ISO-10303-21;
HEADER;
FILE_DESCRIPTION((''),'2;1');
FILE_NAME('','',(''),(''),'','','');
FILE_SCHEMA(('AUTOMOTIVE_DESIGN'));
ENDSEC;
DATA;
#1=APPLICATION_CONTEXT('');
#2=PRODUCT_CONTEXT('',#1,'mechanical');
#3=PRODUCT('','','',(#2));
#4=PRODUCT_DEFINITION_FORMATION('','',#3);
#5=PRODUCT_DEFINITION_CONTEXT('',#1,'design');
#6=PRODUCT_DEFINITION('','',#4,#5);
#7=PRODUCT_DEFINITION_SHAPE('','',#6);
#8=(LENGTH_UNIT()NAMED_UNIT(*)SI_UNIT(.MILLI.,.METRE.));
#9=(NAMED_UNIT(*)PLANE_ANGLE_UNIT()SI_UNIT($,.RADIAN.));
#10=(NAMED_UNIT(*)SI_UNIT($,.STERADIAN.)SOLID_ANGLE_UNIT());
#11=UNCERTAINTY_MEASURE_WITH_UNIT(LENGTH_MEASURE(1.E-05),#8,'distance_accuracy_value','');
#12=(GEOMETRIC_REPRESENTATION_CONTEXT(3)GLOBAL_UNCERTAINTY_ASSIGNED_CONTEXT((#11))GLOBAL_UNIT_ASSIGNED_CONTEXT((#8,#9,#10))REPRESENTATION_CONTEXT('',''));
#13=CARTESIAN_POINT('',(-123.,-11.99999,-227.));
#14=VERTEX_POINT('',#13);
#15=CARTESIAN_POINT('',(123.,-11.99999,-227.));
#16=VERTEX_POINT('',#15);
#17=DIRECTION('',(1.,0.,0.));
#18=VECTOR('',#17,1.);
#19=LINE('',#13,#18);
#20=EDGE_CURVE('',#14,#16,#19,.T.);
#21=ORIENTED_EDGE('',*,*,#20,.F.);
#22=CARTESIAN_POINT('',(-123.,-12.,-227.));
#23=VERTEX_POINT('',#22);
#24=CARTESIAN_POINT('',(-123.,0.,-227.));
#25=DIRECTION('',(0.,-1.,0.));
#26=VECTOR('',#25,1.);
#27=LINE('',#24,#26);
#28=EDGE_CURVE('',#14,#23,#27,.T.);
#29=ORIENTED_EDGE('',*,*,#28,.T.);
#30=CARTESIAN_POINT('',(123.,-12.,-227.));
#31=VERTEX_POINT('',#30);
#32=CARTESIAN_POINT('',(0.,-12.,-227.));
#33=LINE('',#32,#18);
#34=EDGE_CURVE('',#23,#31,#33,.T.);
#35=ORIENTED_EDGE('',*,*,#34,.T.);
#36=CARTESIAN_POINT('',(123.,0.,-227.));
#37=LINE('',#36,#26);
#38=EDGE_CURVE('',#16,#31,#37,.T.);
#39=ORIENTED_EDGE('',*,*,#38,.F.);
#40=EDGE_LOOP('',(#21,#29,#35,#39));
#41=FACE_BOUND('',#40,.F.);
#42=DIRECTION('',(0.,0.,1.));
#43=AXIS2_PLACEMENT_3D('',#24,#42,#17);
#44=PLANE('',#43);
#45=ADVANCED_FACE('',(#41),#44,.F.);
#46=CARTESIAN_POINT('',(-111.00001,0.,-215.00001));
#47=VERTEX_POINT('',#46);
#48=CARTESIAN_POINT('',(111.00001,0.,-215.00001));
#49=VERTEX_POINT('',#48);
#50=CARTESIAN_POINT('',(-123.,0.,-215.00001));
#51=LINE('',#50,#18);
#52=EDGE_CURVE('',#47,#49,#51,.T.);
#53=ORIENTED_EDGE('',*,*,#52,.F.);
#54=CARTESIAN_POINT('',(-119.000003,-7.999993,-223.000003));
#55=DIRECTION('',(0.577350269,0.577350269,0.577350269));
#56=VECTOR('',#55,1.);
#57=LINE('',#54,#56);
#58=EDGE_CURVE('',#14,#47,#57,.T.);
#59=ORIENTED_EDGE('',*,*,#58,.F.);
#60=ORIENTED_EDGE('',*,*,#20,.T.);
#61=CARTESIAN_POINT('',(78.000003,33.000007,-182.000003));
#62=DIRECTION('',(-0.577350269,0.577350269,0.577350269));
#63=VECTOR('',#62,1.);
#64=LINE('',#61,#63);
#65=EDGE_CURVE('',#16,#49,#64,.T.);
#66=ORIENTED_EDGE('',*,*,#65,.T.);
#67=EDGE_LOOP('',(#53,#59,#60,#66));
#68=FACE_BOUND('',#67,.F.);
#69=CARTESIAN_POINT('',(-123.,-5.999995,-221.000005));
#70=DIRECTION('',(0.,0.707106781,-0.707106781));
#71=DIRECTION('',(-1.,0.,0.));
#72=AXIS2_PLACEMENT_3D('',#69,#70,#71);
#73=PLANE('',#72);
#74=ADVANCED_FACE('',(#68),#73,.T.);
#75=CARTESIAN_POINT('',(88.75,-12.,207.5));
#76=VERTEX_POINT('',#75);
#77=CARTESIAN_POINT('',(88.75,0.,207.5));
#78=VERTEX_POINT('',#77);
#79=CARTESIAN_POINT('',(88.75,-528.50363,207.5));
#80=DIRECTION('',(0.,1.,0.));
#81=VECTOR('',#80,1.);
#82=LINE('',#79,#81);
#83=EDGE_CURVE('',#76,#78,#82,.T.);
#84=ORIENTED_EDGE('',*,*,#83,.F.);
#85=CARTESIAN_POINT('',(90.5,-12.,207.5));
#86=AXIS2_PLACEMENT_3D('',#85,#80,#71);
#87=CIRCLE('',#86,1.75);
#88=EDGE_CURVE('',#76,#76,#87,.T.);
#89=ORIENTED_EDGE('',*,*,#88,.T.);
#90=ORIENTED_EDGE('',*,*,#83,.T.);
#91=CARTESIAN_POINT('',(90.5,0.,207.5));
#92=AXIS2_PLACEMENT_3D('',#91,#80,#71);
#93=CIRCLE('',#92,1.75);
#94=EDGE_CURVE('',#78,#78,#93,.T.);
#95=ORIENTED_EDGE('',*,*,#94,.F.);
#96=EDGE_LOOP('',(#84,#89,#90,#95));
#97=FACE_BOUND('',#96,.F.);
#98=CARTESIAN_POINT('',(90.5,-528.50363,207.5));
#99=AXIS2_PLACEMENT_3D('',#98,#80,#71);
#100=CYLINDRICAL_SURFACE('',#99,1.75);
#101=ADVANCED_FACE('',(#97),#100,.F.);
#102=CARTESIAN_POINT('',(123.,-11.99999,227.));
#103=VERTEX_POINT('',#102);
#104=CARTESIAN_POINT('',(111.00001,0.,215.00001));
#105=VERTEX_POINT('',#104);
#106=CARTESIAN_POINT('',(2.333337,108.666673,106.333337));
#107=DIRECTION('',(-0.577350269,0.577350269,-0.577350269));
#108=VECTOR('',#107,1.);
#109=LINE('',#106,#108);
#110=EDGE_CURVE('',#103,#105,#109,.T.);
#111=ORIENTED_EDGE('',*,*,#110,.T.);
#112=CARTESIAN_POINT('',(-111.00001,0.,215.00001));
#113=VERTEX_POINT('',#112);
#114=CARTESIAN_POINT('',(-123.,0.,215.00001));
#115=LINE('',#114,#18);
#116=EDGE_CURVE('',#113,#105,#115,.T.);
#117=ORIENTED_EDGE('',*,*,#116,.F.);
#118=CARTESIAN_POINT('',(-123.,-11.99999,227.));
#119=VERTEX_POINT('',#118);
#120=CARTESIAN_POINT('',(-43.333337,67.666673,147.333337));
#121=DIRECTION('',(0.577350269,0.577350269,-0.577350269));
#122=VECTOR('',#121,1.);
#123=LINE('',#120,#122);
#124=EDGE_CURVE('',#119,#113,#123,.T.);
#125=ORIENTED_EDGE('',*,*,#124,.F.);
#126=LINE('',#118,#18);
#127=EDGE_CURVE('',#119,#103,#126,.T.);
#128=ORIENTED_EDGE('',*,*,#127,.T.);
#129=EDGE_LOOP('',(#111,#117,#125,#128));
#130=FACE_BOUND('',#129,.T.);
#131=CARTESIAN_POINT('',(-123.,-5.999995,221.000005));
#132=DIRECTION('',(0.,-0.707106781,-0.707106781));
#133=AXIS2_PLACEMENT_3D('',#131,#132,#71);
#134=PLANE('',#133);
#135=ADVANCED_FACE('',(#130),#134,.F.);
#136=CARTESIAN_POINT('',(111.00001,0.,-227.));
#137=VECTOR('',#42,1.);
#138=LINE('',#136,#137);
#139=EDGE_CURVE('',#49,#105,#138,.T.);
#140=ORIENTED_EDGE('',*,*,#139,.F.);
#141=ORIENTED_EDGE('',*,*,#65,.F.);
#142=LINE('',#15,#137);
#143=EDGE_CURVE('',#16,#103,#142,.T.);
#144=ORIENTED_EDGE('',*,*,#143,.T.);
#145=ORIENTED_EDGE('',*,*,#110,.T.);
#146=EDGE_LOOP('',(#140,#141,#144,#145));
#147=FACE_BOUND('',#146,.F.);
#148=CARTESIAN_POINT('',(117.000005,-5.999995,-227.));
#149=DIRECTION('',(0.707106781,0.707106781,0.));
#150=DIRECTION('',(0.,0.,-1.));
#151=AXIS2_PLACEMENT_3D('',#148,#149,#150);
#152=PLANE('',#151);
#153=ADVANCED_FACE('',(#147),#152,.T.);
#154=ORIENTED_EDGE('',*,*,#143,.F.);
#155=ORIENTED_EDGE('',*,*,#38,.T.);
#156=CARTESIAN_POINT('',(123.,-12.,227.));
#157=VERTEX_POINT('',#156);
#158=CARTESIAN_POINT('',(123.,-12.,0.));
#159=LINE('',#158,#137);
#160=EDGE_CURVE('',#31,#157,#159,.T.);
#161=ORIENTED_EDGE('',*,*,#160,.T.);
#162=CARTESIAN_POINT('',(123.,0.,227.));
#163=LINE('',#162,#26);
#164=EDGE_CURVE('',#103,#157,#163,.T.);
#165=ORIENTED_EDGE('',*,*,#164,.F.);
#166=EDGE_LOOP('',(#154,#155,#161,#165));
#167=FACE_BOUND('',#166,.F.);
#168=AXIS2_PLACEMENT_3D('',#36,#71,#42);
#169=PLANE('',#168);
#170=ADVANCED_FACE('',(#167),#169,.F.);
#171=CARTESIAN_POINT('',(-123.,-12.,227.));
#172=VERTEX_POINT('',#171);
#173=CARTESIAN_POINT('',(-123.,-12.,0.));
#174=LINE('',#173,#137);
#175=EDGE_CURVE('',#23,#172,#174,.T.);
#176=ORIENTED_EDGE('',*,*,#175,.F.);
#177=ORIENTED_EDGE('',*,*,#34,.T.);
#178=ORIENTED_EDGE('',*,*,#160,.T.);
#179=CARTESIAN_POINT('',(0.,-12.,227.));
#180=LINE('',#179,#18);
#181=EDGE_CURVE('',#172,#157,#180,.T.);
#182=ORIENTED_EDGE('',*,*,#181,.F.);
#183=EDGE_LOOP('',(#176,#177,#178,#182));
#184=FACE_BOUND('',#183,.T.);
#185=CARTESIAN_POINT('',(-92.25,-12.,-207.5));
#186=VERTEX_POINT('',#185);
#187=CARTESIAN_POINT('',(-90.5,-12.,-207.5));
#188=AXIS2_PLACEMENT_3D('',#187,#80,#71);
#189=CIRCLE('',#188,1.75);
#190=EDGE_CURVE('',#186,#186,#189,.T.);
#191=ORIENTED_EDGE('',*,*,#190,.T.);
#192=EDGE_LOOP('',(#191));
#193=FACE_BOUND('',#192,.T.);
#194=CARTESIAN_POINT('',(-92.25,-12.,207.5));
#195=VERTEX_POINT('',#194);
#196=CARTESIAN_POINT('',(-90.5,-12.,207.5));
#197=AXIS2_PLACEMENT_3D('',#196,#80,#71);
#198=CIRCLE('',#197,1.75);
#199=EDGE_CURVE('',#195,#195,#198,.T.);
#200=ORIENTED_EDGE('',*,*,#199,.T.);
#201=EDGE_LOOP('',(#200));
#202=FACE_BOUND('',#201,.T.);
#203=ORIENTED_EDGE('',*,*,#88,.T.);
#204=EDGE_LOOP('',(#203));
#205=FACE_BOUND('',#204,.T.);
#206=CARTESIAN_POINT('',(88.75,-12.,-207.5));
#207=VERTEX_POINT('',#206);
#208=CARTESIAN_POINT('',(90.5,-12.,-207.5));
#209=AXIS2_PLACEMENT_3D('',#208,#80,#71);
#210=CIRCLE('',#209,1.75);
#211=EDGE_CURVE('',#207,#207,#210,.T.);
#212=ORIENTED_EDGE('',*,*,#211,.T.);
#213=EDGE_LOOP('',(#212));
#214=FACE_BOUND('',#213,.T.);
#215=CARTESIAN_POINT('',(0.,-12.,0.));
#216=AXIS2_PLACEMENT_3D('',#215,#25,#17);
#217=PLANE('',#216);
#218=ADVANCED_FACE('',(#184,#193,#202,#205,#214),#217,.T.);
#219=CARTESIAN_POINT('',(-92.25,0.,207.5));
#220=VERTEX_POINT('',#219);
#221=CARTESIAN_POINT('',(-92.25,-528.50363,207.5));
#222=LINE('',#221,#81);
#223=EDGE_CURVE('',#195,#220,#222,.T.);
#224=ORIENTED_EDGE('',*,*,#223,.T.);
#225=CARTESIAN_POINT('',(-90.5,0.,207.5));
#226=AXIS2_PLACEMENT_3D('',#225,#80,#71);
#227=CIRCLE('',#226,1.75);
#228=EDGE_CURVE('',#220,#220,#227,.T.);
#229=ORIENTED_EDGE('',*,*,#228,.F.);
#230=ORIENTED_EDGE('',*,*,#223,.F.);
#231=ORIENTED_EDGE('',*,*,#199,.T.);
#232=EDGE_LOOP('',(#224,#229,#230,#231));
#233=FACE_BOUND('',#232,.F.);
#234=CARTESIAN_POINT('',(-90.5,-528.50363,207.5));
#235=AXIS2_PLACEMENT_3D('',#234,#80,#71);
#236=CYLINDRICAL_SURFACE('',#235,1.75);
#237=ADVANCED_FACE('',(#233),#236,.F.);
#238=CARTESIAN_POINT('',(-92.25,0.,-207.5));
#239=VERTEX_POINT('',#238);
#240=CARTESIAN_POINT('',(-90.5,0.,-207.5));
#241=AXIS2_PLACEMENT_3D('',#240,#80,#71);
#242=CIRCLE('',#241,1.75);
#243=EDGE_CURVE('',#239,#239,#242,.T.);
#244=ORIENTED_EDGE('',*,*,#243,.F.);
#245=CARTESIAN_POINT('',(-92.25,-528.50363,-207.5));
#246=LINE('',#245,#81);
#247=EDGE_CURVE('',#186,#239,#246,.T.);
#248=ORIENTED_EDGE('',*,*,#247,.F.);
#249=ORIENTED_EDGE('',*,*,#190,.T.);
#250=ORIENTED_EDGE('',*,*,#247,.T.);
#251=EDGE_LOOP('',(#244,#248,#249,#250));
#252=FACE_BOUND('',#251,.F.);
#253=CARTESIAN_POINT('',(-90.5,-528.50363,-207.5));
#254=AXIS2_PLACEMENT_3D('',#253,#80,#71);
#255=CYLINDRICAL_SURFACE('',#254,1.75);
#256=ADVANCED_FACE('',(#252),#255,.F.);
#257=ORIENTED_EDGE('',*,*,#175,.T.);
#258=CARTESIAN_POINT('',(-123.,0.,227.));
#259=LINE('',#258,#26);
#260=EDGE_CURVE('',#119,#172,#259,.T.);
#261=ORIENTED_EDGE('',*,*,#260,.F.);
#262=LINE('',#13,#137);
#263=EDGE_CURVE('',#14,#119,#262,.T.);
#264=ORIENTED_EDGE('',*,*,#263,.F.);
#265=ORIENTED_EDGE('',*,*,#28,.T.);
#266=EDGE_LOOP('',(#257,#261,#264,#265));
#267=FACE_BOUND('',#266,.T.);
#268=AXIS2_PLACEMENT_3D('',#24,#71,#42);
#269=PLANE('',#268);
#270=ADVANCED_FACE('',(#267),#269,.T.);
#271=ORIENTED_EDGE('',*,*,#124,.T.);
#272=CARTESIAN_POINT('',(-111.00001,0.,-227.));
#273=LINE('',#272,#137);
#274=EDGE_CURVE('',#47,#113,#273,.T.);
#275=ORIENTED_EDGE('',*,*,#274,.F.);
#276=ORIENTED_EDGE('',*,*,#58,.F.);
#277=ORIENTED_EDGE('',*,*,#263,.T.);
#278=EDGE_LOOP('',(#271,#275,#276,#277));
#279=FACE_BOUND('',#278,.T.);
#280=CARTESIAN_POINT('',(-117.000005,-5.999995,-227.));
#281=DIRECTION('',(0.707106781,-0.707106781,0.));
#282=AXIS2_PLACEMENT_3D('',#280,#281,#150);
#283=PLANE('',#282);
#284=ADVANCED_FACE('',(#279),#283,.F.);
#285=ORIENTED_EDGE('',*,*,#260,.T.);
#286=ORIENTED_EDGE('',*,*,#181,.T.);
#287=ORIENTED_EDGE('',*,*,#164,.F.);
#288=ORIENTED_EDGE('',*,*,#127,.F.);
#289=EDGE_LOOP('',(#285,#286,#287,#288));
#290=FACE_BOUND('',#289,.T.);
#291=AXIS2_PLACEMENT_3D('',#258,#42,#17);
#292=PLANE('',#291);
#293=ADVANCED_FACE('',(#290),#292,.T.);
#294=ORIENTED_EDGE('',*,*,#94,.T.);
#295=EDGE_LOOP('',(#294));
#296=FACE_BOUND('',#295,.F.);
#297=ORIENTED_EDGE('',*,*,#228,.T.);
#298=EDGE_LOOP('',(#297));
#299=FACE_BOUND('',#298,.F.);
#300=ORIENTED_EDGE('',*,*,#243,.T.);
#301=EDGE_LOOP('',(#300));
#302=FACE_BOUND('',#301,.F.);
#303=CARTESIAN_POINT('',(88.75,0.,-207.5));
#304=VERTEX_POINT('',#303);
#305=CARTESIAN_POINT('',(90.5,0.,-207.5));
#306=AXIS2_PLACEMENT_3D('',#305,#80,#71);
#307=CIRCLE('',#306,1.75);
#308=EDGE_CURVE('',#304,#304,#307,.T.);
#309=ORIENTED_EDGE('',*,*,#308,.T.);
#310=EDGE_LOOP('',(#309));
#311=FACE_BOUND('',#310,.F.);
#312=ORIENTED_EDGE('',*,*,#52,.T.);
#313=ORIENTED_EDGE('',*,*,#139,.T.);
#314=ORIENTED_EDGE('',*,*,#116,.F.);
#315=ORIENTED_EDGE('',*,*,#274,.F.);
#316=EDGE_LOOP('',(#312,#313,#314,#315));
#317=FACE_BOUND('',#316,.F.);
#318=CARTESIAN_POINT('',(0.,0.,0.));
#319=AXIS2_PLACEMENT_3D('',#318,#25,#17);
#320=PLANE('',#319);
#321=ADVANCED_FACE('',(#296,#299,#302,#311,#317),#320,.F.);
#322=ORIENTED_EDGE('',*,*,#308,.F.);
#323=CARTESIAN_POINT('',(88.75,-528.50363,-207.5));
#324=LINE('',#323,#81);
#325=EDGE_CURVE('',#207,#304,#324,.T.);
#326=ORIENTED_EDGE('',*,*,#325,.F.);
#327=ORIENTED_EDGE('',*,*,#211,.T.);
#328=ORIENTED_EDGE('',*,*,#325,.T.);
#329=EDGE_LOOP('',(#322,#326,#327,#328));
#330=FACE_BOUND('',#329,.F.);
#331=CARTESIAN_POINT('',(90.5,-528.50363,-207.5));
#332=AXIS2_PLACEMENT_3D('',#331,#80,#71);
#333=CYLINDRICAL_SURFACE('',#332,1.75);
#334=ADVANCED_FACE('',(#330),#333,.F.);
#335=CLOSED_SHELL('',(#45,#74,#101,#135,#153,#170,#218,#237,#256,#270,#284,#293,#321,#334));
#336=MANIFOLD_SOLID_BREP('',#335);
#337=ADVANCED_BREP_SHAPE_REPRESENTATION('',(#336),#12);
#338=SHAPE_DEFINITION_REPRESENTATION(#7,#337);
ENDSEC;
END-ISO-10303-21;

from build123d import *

# Parameters (mm, degrees)
F0_W     = 246
F0_H     = 454
F1_DEPTH = 12
F2_SIZE  = 11.99999
F4_D     = 3.5


# Not quite as in the source:
# - a fillet or chamfer is up to 0.001 mm smaller than in the source, because OpenCascade refuses the exact size


with BuildPart() as f1:
    # F0 (on Front) → F1 (new body)
    with BuildSketch(Plane.XZ):
        Rectangle(F0_W, F0_H)
    extrude(amount=F1_DEPTH)

    # F2 (size 12 in the source; OpenCascade refuses exactly that, so slightly less here)
    f2_edges = [f1.edges().sort_by_distance(p)[0] for p in [
        (0, 0, 227),
        (-123, 0, 0),
        (0, 0, -227),
        (123, 0, 0),
    ]]
    chamfer(f2_edges, length=F2_SIZE)

    # F4 (through all)
    with Locations(Plane.XZ.offset(12)):
        with Locations((-90.5, 207.5), (90.5, 207.5), (90.5, -207.5), (-90.5, -207.5)):
            Hole(F4_D / 2)


solid = f1.part
